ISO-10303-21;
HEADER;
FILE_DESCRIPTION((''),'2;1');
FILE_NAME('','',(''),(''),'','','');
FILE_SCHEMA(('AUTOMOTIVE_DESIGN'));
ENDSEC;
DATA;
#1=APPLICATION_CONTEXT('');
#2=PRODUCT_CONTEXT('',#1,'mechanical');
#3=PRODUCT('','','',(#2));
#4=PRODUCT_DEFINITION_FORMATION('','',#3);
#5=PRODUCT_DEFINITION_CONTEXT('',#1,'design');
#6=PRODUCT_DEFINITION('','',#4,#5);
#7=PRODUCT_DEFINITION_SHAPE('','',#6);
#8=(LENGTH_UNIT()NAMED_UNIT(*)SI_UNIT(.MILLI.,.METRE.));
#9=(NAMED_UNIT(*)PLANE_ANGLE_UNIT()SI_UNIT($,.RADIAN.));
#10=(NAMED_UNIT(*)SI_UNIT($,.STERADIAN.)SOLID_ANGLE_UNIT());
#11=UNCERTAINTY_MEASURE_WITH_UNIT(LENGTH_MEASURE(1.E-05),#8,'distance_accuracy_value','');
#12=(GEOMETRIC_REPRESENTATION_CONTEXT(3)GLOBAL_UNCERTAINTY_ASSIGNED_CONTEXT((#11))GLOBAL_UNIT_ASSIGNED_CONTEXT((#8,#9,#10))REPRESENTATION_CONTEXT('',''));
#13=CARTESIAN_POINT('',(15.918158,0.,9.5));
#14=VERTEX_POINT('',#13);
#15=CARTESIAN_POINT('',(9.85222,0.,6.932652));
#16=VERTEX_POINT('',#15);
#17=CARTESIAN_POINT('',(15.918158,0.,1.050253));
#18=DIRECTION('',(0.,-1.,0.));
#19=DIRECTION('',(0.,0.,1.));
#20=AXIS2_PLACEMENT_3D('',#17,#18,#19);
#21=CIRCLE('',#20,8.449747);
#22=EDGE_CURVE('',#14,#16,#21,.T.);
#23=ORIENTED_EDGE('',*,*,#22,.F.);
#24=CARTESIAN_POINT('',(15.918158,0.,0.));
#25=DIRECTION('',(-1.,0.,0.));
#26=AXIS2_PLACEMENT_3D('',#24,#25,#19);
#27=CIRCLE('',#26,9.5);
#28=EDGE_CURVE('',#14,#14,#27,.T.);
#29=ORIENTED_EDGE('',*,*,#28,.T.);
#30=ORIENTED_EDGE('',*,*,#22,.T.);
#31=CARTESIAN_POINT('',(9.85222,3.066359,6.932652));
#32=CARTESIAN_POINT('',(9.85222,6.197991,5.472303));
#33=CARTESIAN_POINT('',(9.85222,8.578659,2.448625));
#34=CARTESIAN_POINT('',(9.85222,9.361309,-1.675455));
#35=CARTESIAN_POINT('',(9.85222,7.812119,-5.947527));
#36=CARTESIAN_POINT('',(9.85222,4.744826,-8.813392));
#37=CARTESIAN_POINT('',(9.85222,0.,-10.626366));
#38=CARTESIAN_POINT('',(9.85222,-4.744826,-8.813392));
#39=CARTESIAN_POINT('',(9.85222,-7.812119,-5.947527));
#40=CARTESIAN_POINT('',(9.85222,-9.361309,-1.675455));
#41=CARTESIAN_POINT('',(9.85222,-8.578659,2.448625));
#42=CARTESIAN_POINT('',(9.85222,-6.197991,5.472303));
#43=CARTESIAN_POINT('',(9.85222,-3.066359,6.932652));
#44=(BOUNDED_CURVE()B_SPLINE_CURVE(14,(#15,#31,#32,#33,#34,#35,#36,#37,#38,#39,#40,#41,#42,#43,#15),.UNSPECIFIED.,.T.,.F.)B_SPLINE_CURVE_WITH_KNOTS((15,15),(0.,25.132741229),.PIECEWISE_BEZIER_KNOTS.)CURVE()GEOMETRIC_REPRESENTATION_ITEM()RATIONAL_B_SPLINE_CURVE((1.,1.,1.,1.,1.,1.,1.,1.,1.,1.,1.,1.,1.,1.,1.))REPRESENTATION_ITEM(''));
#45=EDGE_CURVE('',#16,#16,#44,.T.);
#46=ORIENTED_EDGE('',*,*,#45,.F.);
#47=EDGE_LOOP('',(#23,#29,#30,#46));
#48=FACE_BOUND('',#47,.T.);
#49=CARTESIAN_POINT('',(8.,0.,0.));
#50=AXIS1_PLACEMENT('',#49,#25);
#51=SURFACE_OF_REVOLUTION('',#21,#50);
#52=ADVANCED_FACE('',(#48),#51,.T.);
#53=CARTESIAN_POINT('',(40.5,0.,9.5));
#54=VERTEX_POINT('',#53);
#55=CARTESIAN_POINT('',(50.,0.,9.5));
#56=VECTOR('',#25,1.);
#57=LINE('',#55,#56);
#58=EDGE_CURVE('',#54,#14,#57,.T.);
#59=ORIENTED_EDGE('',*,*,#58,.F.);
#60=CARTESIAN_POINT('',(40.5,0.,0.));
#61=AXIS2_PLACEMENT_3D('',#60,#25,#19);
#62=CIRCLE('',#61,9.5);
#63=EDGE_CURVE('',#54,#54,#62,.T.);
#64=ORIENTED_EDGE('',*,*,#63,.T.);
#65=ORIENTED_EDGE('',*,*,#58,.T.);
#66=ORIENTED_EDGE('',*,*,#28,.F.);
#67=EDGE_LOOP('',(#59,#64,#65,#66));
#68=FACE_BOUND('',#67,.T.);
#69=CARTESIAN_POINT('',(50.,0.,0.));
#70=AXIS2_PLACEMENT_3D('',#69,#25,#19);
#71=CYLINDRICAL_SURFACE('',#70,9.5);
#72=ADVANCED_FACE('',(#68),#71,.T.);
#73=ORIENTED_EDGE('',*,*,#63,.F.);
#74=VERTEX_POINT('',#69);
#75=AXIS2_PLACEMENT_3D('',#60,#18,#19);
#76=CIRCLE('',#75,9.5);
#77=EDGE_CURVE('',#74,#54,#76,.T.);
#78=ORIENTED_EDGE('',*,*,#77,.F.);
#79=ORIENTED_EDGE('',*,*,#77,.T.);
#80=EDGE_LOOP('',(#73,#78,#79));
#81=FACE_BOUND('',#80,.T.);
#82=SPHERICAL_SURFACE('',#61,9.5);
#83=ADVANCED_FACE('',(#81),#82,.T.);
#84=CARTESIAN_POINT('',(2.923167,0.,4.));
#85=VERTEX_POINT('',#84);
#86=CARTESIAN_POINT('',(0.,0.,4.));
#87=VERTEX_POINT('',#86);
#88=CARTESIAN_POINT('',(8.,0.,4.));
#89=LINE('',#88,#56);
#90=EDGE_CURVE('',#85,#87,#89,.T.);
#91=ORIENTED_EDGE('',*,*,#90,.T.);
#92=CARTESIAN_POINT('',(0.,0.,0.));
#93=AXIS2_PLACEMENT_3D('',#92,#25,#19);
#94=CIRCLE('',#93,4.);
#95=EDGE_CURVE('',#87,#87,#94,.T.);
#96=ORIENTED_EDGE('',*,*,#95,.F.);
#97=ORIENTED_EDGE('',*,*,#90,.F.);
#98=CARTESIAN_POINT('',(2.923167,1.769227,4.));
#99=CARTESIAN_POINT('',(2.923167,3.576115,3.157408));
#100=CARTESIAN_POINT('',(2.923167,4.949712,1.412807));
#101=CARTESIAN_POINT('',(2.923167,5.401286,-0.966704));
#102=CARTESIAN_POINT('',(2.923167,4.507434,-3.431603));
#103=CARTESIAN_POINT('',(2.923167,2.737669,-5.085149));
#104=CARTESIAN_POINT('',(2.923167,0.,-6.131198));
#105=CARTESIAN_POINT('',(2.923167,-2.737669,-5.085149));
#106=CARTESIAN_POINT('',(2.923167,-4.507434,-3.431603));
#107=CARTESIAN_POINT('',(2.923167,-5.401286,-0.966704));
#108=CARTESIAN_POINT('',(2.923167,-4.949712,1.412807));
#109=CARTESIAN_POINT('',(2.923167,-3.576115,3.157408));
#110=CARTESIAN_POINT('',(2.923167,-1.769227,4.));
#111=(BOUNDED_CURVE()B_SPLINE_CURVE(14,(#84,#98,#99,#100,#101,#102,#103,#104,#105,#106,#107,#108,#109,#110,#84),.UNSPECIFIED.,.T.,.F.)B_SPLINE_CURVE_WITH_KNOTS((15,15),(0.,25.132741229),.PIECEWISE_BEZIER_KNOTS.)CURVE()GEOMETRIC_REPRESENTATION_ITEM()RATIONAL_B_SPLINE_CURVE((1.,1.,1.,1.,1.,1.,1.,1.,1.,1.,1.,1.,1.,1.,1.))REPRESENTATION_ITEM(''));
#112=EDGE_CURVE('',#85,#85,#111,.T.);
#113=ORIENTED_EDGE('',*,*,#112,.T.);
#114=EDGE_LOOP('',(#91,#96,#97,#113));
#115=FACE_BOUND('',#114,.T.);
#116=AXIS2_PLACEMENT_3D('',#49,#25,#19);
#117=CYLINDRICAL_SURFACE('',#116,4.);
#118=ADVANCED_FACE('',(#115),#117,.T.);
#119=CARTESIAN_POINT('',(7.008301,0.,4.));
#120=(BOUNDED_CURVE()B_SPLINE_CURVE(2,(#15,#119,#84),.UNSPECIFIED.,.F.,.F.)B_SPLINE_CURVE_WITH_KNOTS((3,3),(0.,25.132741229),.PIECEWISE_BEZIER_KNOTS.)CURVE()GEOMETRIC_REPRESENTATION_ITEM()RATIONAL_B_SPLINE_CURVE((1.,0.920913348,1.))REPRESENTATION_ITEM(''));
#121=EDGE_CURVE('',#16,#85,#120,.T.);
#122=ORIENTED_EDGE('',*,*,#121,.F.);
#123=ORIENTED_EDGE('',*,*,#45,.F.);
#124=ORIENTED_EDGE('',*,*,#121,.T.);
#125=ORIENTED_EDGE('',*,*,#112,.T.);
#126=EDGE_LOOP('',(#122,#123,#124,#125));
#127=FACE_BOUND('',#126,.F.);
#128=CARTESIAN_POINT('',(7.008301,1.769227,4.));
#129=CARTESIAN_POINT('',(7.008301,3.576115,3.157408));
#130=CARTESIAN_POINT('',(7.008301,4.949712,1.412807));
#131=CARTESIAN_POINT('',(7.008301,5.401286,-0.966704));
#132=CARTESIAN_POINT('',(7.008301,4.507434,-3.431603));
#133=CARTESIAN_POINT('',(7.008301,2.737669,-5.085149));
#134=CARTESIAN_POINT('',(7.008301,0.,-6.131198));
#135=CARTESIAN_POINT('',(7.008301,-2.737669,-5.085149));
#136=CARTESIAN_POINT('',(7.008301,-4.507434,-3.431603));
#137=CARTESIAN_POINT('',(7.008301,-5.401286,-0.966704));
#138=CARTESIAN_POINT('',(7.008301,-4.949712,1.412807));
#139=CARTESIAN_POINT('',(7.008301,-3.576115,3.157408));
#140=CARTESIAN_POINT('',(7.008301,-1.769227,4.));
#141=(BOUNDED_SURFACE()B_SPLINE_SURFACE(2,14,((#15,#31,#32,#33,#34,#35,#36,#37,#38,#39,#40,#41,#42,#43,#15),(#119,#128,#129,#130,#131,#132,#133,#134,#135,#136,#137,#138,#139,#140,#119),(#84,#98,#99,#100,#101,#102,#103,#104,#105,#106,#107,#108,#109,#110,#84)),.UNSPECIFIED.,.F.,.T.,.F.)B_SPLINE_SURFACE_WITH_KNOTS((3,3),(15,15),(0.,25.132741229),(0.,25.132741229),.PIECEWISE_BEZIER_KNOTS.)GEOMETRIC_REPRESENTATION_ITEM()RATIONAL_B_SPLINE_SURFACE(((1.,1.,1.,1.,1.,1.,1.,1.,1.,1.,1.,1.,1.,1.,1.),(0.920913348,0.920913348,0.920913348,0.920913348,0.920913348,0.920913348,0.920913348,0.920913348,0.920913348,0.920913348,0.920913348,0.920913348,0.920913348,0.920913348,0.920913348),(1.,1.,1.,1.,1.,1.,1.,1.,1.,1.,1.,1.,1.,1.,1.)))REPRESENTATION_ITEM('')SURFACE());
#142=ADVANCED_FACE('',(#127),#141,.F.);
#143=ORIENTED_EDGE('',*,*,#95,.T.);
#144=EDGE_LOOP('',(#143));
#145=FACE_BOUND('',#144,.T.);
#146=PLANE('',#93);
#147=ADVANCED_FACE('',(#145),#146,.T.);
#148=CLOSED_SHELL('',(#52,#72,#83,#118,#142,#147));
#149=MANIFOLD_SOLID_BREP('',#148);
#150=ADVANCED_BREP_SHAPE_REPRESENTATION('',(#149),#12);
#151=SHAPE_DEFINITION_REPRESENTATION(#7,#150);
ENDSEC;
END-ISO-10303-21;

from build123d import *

# Parameters (mm, degrees)
F2_R = 9.5
F4_R = 9.6520512263


# Not quite as in the source:
# - a fillet or chamfer that OpenCascade refuses, or shapes differently, is made with other operations: its cross-section is extruded or revolved along the edge and cut away or added


with BuildPart() as f1:
    # F0 (on Front) → F1 (revolve)
    with BuildSketch(Plane.XZ):
        Polygon((0, 4), (0, 0), (50, 0), (50, 9.5), (8, 9.5), (8, 4), align=None)
    revolve(axis=Axis((25, 0, 0), (-1, 0, 0)))

    # F2
    f2_edges = [f1.edges().sort_by_distance(p)[0] for p in [
        (50, 0, -9.5),
    ]]
    fillet(f2_edges, radius=F2_R)

    # F3: fillet of radius 8.4497474683 on 1 edges, made by hand

    # F3_s1 → F3_t2 (revolve, cut)
    with BuildSketch(Plane.XZ):
        with BuildLine():
            ThreePointArc((15.9181577498, 9.5), (11.0977007655, 7.990095955), (8, 4))
            Line((8, 4), (8, 9.5))
            Line((8, 9.5), (15.9181577498, 9.5))
        make_face()
    revolve(axis=Axis((8, 0, 0), (-1, 0, 0)), mode=Mode.SUBTRACT)

    # F4
    f4_edges = [f1.edges().sort_by_distance(p)[0] for p in [
        (8, 0, -4),
    ]]
    fillet(f4_edges, radius=F4_R)


solid = f1.part
